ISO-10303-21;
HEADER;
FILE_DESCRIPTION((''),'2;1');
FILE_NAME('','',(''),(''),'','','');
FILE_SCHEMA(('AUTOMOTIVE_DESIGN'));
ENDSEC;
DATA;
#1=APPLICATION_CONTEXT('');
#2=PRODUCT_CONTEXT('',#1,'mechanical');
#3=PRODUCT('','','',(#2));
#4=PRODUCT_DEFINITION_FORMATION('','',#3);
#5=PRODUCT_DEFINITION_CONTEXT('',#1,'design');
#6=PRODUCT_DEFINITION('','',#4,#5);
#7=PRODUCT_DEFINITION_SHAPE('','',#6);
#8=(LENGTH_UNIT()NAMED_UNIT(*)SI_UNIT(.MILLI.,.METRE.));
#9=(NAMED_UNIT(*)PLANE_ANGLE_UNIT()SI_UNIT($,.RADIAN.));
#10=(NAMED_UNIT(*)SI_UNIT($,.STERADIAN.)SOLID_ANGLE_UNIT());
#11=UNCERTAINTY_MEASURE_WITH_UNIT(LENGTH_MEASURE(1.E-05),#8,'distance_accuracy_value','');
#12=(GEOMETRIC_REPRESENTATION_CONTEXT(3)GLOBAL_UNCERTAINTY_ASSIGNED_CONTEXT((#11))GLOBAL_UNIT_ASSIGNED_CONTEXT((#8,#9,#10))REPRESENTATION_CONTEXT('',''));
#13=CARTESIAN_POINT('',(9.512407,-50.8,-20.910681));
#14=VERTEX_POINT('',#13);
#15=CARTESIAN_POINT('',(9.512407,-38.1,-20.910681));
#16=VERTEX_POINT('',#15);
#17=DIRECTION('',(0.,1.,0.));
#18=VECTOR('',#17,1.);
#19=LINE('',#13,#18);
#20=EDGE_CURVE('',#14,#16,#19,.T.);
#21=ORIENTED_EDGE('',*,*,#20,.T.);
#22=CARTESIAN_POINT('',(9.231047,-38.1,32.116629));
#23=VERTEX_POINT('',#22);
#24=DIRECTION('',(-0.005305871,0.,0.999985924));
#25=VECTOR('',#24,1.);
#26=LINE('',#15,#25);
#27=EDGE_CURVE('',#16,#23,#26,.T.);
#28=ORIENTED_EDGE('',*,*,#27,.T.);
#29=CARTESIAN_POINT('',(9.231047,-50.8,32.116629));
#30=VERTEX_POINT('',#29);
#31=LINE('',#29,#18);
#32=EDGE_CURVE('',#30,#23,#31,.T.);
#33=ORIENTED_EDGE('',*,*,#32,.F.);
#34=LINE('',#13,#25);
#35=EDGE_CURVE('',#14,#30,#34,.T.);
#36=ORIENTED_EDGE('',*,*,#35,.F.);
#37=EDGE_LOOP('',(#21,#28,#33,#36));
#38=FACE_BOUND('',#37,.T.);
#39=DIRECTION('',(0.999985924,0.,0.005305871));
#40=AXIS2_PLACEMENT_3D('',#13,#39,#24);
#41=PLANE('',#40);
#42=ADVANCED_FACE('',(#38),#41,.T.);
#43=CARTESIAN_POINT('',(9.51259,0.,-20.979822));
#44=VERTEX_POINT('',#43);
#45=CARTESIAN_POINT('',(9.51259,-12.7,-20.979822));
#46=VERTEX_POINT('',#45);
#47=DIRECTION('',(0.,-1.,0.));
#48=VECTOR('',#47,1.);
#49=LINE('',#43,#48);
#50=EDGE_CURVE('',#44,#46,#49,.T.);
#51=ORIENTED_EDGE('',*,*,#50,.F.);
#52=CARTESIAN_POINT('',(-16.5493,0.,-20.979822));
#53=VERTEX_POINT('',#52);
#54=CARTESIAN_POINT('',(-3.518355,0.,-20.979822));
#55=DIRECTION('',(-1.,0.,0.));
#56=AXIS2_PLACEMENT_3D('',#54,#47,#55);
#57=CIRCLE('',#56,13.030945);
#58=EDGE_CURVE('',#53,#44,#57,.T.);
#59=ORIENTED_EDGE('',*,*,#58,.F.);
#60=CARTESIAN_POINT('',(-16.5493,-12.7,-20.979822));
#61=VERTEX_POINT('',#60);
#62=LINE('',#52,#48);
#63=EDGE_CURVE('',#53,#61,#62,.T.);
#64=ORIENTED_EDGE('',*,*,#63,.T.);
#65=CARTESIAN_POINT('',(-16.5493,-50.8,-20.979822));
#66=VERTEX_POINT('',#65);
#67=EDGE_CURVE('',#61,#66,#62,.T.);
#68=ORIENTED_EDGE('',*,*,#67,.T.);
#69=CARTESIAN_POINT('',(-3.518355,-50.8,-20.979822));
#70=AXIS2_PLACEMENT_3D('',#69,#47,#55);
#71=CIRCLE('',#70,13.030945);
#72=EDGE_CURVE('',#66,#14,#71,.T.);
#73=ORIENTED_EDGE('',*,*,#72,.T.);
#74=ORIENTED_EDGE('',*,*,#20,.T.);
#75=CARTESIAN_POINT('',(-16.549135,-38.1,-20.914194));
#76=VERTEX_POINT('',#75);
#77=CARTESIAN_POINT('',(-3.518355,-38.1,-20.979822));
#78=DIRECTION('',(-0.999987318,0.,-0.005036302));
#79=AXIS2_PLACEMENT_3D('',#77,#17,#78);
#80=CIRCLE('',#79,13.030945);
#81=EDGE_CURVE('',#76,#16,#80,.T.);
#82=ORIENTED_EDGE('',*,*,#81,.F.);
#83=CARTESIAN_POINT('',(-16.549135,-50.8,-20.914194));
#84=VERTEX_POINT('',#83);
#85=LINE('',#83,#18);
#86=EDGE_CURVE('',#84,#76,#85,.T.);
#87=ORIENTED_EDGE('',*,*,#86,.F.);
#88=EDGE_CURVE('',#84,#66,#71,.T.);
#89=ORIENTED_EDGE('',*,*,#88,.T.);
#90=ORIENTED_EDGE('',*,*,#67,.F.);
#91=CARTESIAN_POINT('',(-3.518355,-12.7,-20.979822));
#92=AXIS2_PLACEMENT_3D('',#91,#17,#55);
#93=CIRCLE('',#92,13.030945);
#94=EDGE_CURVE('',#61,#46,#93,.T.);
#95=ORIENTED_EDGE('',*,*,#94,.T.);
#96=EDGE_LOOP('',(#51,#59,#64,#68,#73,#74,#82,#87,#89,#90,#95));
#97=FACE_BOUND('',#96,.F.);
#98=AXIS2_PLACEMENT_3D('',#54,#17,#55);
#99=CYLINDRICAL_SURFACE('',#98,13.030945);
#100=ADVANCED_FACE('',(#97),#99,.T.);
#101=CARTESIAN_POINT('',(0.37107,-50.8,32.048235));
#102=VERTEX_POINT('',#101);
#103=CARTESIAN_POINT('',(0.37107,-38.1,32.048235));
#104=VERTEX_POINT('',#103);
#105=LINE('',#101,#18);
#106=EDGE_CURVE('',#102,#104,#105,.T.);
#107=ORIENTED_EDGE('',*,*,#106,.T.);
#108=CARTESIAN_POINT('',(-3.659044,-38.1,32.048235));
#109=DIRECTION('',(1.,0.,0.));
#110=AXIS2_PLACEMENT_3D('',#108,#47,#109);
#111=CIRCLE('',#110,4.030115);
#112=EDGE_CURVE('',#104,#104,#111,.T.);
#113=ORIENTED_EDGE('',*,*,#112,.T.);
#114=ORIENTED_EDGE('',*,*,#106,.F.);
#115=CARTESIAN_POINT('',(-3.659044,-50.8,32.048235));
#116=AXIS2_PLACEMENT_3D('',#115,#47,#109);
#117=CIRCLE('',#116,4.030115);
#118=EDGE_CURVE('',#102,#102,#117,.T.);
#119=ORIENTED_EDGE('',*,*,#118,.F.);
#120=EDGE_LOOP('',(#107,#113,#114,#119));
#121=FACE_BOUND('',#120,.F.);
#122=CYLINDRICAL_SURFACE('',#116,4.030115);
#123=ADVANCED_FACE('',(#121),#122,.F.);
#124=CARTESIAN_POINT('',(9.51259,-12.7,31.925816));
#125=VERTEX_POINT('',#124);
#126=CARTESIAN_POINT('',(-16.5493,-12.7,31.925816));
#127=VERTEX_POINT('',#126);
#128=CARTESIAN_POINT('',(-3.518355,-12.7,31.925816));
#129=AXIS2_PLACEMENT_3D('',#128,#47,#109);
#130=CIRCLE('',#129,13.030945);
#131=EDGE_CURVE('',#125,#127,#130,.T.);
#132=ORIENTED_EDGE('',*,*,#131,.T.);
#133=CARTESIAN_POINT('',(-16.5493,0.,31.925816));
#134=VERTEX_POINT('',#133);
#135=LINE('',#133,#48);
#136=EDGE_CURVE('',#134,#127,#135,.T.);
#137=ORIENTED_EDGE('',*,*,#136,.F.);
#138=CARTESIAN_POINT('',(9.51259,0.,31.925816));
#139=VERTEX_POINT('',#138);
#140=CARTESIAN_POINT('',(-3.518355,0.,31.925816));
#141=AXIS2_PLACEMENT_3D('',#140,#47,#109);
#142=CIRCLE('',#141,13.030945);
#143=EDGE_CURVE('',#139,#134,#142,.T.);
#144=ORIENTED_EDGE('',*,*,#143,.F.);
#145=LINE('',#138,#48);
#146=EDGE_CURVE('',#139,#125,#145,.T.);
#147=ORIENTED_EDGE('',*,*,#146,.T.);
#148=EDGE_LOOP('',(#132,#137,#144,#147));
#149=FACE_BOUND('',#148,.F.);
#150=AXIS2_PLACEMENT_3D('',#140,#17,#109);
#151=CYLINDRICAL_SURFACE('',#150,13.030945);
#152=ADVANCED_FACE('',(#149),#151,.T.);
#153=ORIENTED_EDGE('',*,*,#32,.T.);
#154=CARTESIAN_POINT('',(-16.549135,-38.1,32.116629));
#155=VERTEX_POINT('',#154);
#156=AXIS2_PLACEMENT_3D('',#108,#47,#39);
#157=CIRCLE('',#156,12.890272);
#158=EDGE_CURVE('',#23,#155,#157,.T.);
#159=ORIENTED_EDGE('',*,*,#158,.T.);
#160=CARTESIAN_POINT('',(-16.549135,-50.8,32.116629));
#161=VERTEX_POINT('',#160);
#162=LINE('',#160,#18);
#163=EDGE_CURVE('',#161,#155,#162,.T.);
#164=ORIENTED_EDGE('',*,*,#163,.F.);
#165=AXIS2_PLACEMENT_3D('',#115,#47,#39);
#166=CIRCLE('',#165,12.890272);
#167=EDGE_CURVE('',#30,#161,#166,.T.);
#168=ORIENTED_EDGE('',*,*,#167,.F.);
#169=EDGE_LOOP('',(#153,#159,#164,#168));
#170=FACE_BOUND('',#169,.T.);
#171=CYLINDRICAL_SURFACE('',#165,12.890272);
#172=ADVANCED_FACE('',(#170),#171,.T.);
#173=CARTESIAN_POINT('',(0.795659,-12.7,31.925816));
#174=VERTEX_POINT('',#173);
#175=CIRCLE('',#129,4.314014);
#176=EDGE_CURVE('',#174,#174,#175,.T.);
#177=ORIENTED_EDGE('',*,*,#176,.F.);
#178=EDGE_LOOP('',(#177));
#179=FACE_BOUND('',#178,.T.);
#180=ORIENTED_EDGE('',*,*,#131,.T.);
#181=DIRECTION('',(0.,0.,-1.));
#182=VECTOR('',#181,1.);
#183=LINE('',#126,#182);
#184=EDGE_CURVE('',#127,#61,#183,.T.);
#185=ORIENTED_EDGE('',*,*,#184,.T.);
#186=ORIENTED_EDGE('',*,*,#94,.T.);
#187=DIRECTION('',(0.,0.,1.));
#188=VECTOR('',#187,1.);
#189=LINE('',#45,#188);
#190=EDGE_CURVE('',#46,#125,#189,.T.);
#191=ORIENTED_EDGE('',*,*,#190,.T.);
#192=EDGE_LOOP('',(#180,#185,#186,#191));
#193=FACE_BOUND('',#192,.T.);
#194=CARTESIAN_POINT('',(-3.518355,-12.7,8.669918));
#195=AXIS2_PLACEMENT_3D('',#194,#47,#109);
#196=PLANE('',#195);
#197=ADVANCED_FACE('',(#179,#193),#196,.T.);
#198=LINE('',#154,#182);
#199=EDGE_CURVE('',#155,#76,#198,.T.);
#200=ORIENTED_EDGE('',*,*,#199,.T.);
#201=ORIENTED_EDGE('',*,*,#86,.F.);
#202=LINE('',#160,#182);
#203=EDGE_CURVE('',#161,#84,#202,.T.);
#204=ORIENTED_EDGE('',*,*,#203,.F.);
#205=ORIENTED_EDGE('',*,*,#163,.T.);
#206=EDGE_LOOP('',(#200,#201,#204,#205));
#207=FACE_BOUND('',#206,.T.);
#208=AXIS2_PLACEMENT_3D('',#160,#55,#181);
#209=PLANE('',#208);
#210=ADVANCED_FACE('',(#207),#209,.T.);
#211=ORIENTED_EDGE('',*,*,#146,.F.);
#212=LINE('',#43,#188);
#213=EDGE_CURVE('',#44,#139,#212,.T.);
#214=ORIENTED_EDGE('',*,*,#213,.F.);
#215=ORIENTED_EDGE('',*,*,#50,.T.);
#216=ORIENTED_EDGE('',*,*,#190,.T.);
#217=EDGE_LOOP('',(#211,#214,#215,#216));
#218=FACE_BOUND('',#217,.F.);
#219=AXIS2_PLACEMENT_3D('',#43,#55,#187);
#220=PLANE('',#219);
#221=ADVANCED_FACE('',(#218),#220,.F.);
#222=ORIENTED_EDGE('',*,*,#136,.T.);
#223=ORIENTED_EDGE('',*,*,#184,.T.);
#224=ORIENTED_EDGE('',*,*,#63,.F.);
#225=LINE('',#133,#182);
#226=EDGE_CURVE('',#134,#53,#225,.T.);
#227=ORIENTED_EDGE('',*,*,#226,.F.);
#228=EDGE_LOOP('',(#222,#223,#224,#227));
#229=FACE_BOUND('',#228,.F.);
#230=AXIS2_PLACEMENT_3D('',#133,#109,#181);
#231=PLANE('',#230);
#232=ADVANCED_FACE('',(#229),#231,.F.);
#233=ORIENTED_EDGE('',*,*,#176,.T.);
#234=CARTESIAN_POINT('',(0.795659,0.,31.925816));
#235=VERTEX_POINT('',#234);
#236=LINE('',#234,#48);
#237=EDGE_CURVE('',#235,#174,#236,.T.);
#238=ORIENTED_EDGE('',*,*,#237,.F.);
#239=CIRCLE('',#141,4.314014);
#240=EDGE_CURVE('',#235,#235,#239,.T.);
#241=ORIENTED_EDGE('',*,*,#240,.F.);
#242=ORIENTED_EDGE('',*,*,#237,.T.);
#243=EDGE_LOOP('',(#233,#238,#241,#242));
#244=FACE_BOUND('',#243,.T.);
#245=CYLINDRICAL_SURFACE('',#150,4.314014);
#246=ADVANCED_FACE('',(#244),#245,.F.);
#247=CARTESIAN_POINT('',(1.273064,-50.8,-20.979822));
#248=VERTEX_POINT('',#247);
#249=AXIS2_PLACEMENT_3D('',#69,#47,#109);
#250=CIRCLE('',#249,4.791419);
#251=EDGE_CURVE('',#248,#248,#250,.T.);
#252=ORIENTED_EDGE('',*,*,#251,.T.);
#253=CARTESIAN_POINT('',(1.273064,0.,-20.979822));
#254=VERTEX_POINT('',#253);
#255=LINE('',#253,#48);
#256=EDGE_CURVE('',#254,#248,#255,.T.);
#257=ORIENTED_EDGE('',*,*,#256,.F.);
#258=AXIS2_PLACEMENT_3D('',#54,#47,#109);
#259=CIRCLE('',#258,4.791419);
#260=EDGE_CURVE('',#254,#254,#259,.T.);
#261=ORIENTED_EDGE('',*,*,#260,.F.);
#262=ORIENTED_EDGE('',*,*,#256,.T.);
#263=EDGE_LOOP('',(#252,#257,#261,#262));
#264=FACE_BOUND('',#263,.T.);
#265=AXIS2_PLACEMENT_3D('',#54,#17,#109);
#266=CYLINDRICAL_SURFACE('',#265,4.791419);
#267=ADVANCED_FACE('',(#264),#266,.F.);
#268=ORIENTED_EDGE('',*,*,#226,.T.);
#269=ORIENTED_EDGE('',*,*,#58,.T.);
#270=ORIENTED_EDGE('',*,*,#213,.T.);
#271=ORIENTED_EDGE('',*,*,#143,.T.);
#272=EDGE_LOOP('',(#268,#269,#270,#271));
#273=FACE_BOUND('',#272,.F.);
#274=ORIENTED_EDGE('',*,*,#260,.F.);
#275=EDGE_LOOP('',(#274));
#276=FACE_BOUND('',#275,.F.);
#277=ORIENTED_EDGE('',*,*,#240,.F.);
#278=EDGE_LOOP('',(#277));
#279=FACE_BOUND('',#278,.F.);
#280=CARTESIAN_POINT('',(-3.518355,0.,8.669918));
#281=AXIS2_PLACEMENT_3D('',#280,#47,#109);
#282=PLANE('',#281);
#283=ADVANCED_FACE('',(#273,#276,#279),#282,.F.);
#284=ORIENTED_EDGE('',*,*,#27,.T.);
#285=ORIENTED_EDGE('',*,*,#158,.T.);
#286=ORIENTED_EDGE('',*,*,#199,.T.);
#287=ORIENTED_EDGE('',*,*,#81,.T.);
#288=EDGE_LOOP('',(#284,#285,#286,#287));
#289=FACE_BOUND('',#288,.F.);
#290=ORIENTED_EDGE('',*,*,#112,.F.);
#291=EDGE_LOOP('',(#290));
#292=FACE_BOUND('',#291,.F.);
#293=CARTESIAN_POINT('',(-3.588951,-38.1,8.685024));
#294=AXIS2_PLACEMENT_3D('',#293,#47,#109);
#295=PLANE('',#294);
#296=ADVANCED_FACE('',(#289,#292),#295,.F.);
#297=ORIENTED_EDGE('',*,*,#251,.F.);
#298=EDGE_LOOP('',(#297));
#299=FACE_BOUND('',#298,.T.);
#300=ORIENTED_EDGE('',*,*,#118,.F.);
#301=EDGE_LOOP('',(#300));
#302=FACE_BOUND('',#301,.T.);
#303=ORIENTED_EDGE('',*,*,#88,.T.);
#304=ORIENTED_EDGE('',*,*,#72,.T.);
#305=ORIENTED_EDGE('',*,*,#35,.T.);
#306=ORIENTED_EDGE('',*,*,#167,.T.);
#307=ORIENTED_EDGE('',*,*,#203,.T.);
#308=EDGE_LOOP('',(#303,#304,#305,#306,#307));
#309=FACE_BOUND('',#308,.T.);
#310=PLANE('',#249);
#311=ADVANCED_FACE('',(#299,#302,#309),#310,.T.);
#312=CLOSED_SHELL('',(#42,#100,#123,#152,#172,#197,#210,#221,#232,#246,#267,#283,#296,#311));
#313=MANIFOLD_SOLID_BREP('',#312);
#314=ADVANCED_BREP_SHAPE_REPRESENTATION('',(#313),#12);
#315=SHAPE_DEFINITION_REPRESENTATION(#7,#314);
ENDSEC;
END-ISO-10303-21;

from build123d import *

# Parameters (mm, degrees)
F0_R     = 4.3140137555
F0_R_2   = 4.7914191877
F1_DEPTH = 12.7
F2_DEPTH = 50.8
F3_R     = 4.4074532963
F4_DEPTH = 12.7
F5_R     = 4.030114566
F6_DEPTH = 25.4


# Not quite as in the source:
# - a feature names something its author has since deleted; it is built from what else it names


with BuildPart() as f1:
    # F0 (on Front) → F1 (new body)
    with BuildSketch(Plane.XZ):
        with BuildLine():
            ThreePointArc((9.5125902444, 31.9258160889), (-3.518355079, 44.9567614123), (-16.5493004024, 31.9258160889))
            Line((-16.5493004024, 31.9258160889), (-16.5493004024, -20.979821682))
            ThreePointArc((-16.5493004024, -20.979821682), (-3.518355079, -7.9488763586), (9.5125902444, -20.979821682))
            Line((9.5125902444, -20.979821682), (9.5125902444, 31.9258160889))
        make_face()
        with Locations((-3.518355079, 31.9258160889)):
            Circle(F0_R, mode=Mode.SUBTRACT)
        with BuildLine():
            ThreePointArc((9.5125902444, -20.979821682), (-3.518355079, -7.9488763586), (-16.5493004024, -20.979821682))
            ThreePointArc((-16.5493004024, -20.979821682), (-3.518355079, -34.0107670054), (9.5125902444, -20.979821682))
        make_face()
        with Locations((-3.518355079, -20.979821682)):
            Circle(F0_R_2, mode=Mode.SUBTRACT)
    extrude(amount=F1_DEPTH)

    # F0 (on Front) → F2 (join)
    with BuildSketch(Plane.XZ):
        with BuildLine():
            ThreePointArc((9.5125902444, -20.979821682), (-3.518355079, -7.9488763586), (-16.5493004024, -20.979821682))
            ThreePointArc((-16.5493004024, -20.979821682), (-3.518355079, -34.0107670054), (9.5125902444, -20.979821682))
        make_face()
        with Locations((-3.518355079, -20.979821682)):
            Circle(F0_R_2, mode=Mode.SUBTRACT)
    extrude(amount=F2_DEPTH)

    # F3 (on face) → F4 (join)
    with BuildSketch(Plane.XZ.offset(50.8)):
        with BuildLine():
            Line((-16.5491351407, 32.1166292513), (-16.5491351407, -21.0454494616))
            ThreePointArc((-16.5491351407, -21.0454494616), (-3.5857392287, -7.9490505844), (9.5124068178, -20.9106811633))
            Line((9.5124068178, -20.9106811633), (9.2310467735, 32.1166292513))
            ThreePointArc((9.2310467735, 32.1166292513), (-3.6590441836, 44.9385075287), (-16.5491351407, 32.1166292513))
        make_face()
        with Locations((-3.6590441836, 32.0482351251)):
            Circle(F3_R, mode=Mode.SUBTRACT)
        with Locations((-3.6590441836, 32.0482351251)):
            Circle(F3_R)
    extrude(amount=-F4_DEPTH)

    # F5 (on face) → F6 (cut)
    with BuildSketch(Plane.XZ.offset(50.8)):
        with Locations((-3.6590441836, 32.0482351251)):
            Circle(F5_R)
    extrude(amount=-F6_DEPTH, mode=Mode.SUBTRACT)


solid = f1.part
